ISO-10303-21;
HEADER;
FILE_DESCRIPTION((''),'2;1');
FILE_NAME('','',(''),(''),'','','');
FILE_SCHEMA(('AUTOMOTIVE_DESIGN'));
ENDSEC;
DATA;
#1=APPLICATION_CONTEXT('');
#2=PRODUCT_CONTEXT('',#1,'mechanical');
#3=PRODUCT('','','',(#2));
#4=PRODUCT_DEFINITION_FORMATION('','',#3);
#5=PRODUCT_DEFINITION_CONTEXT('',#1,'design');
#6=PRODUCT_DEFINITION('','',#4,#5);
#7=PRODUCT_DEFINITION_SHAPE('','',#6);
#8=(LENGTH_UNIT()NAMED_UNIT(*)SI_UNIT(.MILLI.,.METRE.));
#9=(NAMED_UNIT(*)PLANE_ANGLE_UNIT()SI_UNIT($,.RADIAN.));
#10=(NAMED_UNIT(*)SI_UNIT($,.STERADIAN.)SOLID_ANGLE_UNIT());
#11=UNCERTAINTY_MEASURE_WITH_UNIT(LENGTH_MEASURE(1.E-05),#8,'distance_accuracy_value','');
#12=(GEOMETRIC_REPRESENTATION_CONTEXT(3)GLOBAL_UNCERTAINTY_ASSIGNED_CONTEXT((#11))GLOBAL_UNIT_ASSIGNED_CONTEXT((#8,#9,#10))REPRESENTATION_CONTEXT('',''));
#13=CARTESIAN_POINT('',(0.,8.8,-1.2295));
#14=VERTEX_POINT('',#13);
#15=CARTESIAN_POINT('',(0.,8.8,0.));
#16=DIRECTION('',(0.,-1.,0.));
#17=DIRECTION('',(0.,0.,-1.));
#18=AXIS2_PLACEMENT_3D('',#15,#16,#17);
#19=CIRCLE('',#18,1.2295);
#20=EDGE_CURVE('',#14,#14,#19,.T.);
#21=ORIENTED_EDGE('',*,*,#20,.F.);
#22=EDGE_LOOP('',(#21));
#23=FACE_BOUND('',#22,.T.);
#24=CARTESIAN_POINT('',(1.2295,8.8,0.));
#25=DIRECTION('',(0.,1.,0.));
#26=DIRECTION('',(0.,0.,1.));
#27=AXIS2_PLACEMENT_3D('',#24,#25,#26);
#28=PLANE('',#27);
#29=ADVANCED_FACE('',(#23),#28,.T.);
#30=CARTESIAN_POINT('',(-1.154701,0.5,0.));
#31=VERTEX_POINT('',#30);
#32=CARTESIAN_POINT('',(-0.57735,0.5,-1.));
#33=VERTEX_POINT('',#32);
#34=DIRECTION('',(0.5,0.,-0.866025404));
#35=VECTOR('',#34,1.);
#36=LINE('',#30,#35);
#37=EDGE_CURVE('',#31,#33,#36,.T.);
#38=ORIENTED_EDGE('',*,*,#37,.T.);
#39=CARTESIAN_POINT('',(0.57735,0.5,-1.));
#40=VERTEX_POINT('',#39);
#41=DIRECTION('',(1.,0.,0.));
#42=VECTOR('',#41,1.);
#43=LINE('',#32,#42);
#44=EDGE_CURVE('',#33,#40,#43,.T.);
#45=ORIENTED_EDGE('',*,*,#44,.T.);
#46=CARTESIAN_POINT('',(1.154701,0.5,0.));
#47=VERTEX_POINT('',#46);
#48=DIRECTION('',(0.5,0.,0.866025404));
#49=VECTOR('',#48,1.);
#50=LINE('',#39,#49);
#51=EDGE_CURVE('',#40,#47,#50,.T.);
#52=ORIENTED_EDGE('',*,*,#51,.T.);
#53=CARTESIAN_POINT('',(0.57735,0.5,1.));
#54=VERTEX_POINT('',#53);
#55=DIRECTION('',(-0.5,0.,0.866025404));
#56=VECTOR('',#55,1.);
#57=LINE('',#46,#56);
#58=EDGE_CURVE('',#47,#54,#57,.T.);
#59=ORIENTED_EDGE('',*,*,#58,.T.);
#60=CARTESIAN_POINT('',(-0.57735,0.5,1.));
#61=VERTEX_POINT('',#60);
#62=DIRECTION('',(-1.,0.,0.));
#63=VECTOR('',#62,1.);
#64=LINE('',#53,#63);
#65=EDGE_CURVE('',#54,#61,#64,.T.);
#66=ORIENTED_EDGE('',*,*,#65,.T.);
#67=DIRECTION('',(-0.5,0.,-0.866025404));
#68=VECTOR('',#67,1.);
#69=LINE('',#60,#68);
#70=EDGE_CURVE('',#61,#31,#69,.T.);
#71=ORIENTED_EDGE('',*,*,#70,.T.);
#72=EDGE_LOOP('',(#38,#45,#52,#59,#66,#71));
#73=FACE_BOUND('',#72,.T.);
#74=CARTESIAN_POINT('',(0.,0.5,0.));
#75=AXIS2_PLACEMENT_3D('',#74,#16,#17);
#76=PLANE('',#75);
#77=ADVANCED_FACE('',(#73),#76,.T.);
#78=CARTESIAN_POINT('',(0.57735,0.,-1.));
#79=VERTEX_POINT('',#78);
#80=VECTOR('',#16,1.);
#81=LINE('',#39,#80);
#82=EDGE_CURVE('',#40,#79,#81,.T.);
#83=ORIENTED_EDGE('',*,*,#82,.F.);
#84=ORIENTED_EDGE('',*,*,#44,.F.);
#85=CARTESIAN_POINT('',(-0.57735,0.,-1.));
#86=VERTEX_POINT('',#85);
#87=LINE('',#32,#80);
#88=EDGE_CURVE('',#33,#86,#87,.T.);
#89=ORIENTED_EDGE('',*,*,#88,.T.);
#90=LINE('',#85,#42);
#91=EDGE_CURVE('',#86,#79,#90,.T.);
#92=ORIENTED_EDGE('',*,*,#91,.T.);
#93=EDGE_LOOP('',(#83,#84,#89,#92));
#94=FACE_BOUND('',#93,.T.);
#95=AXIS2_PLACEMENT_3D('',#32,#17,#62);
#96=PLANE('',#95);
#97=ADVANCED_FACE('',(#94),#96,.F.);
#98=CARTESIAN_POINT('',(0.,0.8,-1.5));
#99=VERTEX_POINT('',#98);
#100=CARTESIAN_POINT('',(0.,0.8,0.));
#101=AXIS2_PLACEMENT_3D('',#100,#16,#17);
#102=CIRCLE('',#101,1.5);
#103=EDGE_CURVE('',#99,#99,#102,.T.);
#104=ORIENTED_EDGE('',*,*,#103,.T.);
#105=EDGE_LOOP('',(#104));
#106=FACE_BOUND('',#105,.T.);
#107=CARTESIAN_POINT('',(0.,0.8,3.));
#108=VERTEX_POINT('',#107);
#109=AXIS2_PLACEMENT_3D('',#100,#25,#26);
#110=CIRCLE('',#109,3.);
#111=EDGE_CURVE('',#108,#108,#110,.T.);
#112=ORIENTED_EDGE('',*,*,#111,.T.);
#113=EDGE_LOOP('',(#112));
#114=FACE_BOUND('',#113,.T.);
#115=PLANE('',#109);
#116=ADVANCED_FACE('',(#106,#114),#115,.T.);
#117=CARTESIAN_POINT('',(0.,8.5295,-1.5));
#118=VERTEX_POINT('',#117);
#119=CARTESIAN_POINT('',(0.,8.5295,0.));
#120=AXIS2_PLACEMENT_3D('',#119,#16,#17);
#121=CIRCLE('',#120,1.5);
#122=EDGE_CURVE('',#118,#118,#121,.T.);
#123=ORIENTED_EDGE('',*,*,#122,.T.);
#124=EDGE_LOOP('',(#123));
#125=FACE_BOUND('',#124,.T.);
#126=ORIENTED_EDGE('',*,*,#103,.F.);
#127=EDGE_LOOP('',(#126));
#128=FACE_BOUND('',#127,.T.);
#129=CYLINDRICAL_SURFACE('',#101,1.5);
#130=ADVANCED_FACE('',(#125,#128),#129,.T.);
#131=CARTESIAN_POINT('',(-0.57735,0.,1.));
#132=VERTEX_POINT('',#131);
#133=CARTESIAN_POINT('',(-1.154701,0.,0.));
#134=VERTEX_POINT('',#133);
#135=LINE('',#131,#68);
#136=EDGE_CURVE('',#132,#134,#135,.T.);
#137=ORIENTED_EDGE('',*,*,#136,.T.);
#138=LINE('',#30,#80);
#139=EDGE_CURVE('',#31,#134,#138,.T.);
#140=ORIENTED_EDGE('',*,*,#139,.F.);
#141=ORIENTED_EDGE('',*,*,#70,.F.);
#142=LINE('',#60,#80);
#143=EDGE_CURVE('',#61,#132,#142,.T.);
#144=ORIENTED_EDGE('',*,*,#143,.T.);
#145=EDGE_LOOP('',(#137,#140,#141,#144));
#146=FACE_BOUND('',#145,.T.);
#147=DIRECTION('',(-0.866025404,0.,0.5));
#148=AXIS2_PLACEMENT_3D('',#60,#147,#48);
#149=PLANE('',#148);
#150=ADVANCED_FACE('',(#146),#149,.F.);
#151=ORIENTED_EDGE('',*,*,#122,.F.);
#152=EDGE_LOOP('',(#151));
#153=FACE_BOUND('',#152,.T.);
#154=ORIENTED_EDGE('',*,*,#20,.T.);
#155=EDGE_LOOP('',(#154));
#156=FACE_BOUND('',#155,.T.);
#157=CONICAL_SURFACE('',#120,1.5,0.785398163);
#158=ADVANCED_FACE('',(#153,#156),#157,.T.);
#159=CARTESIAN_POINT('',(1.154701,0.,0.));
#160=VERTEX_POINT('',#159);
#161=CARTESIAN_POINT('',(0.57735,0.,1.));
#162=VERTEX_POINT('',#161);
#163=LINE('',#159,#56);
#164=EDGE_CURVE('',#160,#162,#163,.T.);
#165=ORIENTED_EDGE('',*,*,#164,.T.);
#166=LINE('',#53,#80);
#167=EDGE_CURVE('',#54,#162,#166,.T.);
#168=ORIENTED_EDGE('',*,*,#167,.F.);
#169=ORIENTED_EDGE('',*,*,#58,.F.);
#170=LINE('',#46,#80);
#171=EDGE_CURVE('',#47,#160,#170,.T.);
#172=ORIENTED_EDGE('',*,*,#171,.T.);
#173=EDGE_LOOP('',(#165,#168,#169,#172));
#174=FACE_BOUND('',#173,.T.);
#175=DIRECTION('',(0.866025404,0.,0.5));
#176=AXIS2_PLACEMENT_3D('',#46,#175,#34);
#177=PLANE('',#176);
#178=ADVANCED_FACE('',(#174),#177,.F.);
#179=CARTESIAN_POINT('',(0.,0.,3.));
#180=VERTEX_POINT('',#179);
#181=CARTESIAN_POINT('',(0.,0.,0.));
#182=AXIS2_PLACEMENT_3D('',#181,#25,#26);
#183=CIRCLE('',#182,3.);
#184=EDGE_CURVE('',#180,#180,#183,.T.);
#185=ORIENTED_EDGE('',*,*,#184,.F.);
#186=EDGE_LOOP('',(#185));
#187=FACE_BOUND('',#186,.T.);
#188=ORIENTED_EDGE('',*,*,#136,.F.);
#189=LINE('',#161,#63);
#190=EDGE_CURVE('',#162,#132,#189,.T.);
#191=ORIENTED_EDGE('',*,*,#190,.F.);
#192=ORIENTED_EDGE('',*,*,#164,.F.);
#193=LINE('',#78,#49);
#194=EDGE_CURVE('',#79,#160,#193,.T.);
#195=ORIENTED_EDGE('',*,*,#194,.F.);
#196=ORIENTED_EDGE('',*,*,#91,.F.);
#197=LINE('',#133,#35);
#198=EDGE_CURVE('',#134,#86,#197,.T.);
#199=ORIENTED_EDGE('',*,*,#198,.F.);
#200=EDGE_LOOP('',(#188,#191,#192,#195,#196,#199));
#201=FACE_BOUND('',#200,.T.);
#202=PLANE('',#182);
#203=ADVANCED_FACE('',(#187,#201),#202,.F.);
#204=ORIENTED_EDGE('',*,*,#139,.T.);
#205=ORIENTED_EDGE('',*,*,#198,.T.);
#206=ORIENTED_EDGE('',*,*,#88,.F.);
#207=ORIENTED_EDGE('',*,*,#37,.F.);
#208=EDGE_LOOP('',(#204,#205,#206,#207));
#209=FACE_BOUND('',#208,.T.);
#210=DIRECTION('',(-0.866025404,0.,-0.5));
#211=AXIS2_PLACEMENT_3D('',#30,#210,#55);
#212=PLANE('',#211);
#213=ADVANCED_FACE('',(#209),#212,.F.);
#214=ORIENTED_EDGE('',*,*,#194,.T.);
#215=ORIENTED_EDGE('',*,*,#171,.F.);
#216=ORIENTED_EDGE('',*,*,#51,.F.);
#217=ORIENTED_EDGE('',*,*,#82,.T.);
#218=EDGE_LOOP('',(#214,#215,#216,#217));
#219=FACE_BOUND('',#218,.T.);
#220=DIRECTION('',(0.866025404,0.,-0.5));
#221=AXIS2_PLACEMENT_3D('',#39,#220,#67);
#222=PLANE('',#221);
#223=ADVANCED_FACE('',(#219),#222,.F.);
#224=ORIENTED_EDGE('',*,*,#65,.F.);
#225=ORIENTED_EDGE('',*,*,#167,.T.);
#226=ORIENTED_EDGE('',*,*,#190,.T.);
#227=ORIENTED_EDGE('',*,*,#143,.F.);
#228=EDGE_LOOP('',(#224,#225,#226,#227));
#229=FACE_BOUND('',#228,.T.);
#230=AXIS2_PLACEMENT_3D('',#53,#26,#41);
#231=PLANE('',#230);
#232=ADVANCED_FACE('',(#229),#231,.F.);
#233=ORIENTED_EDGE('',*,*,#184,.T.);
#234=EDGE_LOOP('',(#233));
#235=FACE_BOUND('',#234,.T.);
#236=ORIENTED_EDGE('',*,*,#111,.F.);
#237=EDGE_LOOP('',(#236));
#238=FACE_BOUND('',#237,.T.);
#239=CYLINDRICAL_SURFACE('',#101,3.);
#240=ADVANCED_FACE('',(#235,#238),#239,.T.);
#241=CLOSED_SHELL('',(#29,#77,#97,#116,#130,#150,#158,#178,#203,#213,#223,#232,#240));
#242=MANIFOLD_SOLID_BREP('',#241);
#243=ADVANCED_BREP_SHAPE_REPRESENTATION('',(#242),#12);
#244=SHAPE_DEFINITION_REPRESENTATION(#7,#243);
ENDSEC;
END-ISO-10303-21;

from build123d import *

# Parameters (mm, degrees)
SKETCH_1_R          = 3
EXTRUDE_1_DEPTH     = 0.8
CUT_EXTRUDE_1_DEPTH = 0.5


# Read off the part's stored shape, not the designer's step: M3 机械螺纹 螺柱3
with BuildPart() as part:
    # 草图1 → 凸台-拉伸1 (new body)
    with BuildSketch(Plane(origin=(0, 0, 0), x_dir=(1, 0, 0), z_dir=(0, 1, 0))):
        with Locations(Location((0, 0, 0), (0, 0, 270))):
            Circle(SKETCH_1_R)
    extrude(amount=EXTRUDE_1_DEPTH)

    # M3 机械螺纹 螺柱3 outline → M3 机械螺纹 螺柱3 (revolve)
    with BuildSketch(Plane.XY):
        Polygon((1.2295, 8.8), (0, 8.8), (0, 0.8), (1.5, 0.8), (1.5, 8.5295), align=None)
    revolve(axis=Axis((0, 0, 0), (0, 1, 0)))

    # 草图8 → 切除-拉伸1 (cut)
    with BuildSketch(Plane.XZ):
        Polygon((1.154700538, 0), (0.577350269, 1), (-0.577350269, 1), (-1.154700538, 0), (-0.577350269, -1), (0.577350269, -1), align=None)
    extrude(amount=-CUT_EXTRUDE_1_DEPTH, mode=Mode.SUBTRACT)


solid = part.part
